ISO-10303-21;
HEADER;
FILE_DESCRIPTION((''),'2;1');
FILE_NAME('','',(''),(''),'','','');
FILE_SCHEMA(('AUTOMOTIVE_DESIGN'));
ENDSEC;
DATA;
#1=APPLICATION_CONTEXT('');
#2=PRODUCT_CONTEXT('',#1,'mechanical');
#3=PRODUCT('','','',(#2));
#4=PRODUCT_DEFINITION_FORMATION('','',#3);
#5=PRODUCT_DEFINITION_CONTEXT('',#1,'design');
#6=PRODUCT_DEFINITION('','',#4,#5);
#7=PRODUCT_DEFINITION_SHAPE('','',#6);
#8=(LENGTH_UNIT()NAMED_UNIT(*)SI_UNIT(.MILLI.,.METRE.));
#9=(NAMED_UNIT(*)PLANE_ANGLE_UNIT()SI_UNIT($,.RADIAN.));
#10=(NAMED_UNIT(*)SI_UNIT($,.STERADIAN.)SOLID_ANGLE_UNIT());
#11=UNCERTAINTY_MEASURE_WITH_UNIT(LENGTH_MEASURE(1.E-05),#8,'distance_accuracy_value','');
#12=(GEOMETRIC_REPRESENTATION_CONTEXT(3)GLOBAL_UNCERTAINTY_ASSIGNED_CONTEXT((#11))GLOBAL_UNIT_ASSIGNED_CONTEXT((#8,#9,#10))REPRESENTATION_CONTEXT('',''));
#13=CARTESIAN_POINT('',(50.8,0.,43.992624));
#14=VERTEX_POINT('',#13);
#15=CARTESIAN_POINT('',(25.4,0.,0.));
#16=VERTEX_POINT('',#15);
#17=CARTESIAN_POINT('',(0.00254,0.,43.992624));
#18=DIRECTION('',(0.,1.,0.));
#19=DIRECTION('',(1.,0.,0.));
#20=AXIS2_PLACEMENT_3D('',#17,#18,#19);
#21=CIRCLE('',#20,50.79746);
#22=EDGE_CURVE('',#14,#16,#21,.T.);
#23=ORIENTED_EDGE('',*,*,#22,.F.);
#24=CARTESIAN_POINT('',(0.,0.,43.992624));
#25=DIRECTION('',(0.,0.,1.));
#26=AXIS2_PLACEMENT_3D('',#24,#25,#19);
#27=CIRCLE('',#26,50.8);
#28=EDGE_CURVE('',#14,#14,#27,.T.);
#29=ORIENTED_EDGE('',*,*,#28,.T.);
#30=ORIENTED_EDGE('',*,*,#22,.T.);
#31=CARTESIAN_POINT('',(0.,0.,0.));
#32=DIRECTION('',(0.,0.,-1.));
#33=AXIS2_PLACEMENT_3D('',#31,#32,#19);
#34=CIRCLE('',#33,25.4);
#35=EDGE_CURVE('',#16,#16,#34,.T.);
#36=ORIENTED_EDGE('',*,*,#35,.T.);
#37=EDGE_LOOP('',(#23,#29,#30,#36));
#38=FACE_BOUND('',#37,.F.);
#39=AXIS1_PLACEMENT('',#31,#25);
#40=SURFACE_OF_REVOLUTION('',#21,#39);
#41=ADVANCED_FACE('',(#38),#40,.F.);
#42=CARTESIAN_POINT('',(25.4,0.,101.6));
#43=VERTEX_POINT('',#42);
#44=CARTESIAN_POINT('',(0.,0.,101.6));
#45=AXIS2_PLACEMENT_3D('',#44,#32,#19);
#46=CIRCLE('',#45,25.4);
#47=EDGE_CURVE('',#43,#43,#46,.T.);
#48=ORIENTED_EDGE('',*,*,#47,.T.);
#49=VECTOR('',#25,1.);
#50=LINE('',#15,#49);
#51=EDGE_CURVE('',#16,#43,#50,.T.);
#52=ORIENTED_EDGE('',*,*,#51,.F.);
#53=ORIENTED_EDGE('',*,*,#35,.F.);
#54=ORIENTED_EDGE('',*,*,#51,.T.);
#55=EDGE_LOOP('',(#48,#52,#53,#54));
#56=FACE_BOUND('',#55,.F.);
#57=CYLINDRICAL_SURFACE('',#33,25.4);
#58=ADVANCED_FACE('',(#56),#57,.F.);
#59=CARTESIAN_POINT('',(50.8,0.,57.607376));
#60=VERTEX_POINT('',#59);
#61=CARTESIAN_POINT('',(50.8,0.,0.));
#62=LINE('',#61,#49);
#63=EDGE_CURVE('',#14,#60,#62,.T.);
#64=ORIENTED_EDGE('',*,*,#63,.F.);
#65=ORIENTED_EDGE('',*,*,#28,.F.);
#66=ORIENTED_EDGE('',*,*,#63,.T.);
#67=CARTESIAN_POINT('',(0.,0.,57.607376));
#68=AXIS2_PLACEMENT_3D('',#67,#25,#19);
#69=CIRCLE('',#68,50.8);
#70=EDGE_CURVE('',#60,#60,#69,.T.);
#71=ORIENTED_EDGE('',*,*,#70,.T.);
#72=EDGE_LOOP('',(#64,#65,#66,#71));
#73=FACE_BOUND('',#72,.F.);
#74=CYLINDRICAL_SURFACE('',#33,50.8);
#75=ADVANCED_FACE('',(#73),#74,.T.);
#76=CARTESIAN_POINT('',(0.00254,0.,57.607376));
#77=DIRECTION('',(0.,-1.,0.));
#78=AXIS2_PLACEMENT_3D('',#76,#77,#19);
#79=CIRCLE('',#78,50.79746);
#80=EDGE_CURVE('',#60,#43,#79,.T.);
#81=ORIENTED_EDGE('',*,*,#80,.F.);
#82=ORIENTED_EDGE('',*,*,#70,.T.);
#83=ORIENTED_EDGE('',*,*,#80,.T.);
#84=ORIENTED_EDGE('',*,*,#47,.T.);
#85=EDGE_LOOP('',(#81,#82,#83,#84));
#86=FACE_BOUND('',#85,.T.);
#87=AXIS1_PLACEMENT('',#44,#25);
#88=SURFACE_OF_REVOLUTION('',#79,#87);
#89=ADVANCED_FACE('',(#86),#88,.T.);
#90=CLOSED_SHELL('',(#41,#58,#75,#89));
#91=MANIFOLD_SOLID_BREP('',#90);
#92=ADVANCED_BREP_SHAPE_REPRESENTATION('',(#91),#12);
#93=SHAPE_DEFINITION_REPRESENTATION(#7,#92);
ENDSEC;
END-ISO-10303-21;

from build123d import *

# Parameters (mm, degrees)
F1_R     = 25.4
F2_DEPTH = 101.6
F0_R     = 50.8
F3_DEPTH = 101.6
F4_R     = 25.4
F5_DEPTH = 101.601


# Not quite as in the source:
# - a fillet or chamfer that OpenCascade refuses, or shapes differently, is made with other operations: its cross-section is extruded or revolved along the edge and cut away or added


with BuildPart() as f2:
    # F1 (on face) → F2 (new body)
    with BuildSketch(Plane.XY):
        Circle(F1_R)
    extrude(amount=F2_DEPTH)

    # F0 (on Top) → F3 (join)
    with BuildSketch(Plane.XY):
        Circle(F0_R)
    extrude(amount=F3_DEPTH)

    # F4 (on face) → F5 (cut, through all)
    with BuildSketch(Plane(origin=(0, 0, 0), x_dir=(1, 0, 0), z_dir=(0, 0, -1))):
        Circle(F4_R)
    extrude(amount=-F5_DEPTH, mode=Mode.SUBTRACT)

    # F6: fillet of radius 50.79746 on 2 edges, made by hand

    # F6_s1 → F6_t2 (revolve, cut)
    with BuildSketch(Plane.XZ):
        with BuildLine():
            ThreePointArc((50.8, 57.6073759819), (43.9940641888, 83.0067409739), (25.4, 101.6))
            Line((25.4, 101.6), (50.8, 101.6))
            Line((50.8, 101.6), (50.8, 57.6073759819))
        make_face()
    revolve(axis=Axis((0, 0, 101.6), (0, 0, 1)), mode=Mode.SUBTRACT)

    # F6_s3 → F6_t4 (revolve, cut)
    with BuildSketch(Plane.XZ):
        with BuildLine():
            ThreePointArc((50.8, 43.9926240181), (43.9940641888, 18.5932590261), (25.4, 0))
            Line((25.4, 0), (50.8, 0))
            Line((50.8, 0), (50.8, 43.9926240181))
        make_face()
    revolve(axis=Axis((0, 0, 0), (0, 0, 1)), mode=Mode.SUBTRACT)


solid = f2.part
